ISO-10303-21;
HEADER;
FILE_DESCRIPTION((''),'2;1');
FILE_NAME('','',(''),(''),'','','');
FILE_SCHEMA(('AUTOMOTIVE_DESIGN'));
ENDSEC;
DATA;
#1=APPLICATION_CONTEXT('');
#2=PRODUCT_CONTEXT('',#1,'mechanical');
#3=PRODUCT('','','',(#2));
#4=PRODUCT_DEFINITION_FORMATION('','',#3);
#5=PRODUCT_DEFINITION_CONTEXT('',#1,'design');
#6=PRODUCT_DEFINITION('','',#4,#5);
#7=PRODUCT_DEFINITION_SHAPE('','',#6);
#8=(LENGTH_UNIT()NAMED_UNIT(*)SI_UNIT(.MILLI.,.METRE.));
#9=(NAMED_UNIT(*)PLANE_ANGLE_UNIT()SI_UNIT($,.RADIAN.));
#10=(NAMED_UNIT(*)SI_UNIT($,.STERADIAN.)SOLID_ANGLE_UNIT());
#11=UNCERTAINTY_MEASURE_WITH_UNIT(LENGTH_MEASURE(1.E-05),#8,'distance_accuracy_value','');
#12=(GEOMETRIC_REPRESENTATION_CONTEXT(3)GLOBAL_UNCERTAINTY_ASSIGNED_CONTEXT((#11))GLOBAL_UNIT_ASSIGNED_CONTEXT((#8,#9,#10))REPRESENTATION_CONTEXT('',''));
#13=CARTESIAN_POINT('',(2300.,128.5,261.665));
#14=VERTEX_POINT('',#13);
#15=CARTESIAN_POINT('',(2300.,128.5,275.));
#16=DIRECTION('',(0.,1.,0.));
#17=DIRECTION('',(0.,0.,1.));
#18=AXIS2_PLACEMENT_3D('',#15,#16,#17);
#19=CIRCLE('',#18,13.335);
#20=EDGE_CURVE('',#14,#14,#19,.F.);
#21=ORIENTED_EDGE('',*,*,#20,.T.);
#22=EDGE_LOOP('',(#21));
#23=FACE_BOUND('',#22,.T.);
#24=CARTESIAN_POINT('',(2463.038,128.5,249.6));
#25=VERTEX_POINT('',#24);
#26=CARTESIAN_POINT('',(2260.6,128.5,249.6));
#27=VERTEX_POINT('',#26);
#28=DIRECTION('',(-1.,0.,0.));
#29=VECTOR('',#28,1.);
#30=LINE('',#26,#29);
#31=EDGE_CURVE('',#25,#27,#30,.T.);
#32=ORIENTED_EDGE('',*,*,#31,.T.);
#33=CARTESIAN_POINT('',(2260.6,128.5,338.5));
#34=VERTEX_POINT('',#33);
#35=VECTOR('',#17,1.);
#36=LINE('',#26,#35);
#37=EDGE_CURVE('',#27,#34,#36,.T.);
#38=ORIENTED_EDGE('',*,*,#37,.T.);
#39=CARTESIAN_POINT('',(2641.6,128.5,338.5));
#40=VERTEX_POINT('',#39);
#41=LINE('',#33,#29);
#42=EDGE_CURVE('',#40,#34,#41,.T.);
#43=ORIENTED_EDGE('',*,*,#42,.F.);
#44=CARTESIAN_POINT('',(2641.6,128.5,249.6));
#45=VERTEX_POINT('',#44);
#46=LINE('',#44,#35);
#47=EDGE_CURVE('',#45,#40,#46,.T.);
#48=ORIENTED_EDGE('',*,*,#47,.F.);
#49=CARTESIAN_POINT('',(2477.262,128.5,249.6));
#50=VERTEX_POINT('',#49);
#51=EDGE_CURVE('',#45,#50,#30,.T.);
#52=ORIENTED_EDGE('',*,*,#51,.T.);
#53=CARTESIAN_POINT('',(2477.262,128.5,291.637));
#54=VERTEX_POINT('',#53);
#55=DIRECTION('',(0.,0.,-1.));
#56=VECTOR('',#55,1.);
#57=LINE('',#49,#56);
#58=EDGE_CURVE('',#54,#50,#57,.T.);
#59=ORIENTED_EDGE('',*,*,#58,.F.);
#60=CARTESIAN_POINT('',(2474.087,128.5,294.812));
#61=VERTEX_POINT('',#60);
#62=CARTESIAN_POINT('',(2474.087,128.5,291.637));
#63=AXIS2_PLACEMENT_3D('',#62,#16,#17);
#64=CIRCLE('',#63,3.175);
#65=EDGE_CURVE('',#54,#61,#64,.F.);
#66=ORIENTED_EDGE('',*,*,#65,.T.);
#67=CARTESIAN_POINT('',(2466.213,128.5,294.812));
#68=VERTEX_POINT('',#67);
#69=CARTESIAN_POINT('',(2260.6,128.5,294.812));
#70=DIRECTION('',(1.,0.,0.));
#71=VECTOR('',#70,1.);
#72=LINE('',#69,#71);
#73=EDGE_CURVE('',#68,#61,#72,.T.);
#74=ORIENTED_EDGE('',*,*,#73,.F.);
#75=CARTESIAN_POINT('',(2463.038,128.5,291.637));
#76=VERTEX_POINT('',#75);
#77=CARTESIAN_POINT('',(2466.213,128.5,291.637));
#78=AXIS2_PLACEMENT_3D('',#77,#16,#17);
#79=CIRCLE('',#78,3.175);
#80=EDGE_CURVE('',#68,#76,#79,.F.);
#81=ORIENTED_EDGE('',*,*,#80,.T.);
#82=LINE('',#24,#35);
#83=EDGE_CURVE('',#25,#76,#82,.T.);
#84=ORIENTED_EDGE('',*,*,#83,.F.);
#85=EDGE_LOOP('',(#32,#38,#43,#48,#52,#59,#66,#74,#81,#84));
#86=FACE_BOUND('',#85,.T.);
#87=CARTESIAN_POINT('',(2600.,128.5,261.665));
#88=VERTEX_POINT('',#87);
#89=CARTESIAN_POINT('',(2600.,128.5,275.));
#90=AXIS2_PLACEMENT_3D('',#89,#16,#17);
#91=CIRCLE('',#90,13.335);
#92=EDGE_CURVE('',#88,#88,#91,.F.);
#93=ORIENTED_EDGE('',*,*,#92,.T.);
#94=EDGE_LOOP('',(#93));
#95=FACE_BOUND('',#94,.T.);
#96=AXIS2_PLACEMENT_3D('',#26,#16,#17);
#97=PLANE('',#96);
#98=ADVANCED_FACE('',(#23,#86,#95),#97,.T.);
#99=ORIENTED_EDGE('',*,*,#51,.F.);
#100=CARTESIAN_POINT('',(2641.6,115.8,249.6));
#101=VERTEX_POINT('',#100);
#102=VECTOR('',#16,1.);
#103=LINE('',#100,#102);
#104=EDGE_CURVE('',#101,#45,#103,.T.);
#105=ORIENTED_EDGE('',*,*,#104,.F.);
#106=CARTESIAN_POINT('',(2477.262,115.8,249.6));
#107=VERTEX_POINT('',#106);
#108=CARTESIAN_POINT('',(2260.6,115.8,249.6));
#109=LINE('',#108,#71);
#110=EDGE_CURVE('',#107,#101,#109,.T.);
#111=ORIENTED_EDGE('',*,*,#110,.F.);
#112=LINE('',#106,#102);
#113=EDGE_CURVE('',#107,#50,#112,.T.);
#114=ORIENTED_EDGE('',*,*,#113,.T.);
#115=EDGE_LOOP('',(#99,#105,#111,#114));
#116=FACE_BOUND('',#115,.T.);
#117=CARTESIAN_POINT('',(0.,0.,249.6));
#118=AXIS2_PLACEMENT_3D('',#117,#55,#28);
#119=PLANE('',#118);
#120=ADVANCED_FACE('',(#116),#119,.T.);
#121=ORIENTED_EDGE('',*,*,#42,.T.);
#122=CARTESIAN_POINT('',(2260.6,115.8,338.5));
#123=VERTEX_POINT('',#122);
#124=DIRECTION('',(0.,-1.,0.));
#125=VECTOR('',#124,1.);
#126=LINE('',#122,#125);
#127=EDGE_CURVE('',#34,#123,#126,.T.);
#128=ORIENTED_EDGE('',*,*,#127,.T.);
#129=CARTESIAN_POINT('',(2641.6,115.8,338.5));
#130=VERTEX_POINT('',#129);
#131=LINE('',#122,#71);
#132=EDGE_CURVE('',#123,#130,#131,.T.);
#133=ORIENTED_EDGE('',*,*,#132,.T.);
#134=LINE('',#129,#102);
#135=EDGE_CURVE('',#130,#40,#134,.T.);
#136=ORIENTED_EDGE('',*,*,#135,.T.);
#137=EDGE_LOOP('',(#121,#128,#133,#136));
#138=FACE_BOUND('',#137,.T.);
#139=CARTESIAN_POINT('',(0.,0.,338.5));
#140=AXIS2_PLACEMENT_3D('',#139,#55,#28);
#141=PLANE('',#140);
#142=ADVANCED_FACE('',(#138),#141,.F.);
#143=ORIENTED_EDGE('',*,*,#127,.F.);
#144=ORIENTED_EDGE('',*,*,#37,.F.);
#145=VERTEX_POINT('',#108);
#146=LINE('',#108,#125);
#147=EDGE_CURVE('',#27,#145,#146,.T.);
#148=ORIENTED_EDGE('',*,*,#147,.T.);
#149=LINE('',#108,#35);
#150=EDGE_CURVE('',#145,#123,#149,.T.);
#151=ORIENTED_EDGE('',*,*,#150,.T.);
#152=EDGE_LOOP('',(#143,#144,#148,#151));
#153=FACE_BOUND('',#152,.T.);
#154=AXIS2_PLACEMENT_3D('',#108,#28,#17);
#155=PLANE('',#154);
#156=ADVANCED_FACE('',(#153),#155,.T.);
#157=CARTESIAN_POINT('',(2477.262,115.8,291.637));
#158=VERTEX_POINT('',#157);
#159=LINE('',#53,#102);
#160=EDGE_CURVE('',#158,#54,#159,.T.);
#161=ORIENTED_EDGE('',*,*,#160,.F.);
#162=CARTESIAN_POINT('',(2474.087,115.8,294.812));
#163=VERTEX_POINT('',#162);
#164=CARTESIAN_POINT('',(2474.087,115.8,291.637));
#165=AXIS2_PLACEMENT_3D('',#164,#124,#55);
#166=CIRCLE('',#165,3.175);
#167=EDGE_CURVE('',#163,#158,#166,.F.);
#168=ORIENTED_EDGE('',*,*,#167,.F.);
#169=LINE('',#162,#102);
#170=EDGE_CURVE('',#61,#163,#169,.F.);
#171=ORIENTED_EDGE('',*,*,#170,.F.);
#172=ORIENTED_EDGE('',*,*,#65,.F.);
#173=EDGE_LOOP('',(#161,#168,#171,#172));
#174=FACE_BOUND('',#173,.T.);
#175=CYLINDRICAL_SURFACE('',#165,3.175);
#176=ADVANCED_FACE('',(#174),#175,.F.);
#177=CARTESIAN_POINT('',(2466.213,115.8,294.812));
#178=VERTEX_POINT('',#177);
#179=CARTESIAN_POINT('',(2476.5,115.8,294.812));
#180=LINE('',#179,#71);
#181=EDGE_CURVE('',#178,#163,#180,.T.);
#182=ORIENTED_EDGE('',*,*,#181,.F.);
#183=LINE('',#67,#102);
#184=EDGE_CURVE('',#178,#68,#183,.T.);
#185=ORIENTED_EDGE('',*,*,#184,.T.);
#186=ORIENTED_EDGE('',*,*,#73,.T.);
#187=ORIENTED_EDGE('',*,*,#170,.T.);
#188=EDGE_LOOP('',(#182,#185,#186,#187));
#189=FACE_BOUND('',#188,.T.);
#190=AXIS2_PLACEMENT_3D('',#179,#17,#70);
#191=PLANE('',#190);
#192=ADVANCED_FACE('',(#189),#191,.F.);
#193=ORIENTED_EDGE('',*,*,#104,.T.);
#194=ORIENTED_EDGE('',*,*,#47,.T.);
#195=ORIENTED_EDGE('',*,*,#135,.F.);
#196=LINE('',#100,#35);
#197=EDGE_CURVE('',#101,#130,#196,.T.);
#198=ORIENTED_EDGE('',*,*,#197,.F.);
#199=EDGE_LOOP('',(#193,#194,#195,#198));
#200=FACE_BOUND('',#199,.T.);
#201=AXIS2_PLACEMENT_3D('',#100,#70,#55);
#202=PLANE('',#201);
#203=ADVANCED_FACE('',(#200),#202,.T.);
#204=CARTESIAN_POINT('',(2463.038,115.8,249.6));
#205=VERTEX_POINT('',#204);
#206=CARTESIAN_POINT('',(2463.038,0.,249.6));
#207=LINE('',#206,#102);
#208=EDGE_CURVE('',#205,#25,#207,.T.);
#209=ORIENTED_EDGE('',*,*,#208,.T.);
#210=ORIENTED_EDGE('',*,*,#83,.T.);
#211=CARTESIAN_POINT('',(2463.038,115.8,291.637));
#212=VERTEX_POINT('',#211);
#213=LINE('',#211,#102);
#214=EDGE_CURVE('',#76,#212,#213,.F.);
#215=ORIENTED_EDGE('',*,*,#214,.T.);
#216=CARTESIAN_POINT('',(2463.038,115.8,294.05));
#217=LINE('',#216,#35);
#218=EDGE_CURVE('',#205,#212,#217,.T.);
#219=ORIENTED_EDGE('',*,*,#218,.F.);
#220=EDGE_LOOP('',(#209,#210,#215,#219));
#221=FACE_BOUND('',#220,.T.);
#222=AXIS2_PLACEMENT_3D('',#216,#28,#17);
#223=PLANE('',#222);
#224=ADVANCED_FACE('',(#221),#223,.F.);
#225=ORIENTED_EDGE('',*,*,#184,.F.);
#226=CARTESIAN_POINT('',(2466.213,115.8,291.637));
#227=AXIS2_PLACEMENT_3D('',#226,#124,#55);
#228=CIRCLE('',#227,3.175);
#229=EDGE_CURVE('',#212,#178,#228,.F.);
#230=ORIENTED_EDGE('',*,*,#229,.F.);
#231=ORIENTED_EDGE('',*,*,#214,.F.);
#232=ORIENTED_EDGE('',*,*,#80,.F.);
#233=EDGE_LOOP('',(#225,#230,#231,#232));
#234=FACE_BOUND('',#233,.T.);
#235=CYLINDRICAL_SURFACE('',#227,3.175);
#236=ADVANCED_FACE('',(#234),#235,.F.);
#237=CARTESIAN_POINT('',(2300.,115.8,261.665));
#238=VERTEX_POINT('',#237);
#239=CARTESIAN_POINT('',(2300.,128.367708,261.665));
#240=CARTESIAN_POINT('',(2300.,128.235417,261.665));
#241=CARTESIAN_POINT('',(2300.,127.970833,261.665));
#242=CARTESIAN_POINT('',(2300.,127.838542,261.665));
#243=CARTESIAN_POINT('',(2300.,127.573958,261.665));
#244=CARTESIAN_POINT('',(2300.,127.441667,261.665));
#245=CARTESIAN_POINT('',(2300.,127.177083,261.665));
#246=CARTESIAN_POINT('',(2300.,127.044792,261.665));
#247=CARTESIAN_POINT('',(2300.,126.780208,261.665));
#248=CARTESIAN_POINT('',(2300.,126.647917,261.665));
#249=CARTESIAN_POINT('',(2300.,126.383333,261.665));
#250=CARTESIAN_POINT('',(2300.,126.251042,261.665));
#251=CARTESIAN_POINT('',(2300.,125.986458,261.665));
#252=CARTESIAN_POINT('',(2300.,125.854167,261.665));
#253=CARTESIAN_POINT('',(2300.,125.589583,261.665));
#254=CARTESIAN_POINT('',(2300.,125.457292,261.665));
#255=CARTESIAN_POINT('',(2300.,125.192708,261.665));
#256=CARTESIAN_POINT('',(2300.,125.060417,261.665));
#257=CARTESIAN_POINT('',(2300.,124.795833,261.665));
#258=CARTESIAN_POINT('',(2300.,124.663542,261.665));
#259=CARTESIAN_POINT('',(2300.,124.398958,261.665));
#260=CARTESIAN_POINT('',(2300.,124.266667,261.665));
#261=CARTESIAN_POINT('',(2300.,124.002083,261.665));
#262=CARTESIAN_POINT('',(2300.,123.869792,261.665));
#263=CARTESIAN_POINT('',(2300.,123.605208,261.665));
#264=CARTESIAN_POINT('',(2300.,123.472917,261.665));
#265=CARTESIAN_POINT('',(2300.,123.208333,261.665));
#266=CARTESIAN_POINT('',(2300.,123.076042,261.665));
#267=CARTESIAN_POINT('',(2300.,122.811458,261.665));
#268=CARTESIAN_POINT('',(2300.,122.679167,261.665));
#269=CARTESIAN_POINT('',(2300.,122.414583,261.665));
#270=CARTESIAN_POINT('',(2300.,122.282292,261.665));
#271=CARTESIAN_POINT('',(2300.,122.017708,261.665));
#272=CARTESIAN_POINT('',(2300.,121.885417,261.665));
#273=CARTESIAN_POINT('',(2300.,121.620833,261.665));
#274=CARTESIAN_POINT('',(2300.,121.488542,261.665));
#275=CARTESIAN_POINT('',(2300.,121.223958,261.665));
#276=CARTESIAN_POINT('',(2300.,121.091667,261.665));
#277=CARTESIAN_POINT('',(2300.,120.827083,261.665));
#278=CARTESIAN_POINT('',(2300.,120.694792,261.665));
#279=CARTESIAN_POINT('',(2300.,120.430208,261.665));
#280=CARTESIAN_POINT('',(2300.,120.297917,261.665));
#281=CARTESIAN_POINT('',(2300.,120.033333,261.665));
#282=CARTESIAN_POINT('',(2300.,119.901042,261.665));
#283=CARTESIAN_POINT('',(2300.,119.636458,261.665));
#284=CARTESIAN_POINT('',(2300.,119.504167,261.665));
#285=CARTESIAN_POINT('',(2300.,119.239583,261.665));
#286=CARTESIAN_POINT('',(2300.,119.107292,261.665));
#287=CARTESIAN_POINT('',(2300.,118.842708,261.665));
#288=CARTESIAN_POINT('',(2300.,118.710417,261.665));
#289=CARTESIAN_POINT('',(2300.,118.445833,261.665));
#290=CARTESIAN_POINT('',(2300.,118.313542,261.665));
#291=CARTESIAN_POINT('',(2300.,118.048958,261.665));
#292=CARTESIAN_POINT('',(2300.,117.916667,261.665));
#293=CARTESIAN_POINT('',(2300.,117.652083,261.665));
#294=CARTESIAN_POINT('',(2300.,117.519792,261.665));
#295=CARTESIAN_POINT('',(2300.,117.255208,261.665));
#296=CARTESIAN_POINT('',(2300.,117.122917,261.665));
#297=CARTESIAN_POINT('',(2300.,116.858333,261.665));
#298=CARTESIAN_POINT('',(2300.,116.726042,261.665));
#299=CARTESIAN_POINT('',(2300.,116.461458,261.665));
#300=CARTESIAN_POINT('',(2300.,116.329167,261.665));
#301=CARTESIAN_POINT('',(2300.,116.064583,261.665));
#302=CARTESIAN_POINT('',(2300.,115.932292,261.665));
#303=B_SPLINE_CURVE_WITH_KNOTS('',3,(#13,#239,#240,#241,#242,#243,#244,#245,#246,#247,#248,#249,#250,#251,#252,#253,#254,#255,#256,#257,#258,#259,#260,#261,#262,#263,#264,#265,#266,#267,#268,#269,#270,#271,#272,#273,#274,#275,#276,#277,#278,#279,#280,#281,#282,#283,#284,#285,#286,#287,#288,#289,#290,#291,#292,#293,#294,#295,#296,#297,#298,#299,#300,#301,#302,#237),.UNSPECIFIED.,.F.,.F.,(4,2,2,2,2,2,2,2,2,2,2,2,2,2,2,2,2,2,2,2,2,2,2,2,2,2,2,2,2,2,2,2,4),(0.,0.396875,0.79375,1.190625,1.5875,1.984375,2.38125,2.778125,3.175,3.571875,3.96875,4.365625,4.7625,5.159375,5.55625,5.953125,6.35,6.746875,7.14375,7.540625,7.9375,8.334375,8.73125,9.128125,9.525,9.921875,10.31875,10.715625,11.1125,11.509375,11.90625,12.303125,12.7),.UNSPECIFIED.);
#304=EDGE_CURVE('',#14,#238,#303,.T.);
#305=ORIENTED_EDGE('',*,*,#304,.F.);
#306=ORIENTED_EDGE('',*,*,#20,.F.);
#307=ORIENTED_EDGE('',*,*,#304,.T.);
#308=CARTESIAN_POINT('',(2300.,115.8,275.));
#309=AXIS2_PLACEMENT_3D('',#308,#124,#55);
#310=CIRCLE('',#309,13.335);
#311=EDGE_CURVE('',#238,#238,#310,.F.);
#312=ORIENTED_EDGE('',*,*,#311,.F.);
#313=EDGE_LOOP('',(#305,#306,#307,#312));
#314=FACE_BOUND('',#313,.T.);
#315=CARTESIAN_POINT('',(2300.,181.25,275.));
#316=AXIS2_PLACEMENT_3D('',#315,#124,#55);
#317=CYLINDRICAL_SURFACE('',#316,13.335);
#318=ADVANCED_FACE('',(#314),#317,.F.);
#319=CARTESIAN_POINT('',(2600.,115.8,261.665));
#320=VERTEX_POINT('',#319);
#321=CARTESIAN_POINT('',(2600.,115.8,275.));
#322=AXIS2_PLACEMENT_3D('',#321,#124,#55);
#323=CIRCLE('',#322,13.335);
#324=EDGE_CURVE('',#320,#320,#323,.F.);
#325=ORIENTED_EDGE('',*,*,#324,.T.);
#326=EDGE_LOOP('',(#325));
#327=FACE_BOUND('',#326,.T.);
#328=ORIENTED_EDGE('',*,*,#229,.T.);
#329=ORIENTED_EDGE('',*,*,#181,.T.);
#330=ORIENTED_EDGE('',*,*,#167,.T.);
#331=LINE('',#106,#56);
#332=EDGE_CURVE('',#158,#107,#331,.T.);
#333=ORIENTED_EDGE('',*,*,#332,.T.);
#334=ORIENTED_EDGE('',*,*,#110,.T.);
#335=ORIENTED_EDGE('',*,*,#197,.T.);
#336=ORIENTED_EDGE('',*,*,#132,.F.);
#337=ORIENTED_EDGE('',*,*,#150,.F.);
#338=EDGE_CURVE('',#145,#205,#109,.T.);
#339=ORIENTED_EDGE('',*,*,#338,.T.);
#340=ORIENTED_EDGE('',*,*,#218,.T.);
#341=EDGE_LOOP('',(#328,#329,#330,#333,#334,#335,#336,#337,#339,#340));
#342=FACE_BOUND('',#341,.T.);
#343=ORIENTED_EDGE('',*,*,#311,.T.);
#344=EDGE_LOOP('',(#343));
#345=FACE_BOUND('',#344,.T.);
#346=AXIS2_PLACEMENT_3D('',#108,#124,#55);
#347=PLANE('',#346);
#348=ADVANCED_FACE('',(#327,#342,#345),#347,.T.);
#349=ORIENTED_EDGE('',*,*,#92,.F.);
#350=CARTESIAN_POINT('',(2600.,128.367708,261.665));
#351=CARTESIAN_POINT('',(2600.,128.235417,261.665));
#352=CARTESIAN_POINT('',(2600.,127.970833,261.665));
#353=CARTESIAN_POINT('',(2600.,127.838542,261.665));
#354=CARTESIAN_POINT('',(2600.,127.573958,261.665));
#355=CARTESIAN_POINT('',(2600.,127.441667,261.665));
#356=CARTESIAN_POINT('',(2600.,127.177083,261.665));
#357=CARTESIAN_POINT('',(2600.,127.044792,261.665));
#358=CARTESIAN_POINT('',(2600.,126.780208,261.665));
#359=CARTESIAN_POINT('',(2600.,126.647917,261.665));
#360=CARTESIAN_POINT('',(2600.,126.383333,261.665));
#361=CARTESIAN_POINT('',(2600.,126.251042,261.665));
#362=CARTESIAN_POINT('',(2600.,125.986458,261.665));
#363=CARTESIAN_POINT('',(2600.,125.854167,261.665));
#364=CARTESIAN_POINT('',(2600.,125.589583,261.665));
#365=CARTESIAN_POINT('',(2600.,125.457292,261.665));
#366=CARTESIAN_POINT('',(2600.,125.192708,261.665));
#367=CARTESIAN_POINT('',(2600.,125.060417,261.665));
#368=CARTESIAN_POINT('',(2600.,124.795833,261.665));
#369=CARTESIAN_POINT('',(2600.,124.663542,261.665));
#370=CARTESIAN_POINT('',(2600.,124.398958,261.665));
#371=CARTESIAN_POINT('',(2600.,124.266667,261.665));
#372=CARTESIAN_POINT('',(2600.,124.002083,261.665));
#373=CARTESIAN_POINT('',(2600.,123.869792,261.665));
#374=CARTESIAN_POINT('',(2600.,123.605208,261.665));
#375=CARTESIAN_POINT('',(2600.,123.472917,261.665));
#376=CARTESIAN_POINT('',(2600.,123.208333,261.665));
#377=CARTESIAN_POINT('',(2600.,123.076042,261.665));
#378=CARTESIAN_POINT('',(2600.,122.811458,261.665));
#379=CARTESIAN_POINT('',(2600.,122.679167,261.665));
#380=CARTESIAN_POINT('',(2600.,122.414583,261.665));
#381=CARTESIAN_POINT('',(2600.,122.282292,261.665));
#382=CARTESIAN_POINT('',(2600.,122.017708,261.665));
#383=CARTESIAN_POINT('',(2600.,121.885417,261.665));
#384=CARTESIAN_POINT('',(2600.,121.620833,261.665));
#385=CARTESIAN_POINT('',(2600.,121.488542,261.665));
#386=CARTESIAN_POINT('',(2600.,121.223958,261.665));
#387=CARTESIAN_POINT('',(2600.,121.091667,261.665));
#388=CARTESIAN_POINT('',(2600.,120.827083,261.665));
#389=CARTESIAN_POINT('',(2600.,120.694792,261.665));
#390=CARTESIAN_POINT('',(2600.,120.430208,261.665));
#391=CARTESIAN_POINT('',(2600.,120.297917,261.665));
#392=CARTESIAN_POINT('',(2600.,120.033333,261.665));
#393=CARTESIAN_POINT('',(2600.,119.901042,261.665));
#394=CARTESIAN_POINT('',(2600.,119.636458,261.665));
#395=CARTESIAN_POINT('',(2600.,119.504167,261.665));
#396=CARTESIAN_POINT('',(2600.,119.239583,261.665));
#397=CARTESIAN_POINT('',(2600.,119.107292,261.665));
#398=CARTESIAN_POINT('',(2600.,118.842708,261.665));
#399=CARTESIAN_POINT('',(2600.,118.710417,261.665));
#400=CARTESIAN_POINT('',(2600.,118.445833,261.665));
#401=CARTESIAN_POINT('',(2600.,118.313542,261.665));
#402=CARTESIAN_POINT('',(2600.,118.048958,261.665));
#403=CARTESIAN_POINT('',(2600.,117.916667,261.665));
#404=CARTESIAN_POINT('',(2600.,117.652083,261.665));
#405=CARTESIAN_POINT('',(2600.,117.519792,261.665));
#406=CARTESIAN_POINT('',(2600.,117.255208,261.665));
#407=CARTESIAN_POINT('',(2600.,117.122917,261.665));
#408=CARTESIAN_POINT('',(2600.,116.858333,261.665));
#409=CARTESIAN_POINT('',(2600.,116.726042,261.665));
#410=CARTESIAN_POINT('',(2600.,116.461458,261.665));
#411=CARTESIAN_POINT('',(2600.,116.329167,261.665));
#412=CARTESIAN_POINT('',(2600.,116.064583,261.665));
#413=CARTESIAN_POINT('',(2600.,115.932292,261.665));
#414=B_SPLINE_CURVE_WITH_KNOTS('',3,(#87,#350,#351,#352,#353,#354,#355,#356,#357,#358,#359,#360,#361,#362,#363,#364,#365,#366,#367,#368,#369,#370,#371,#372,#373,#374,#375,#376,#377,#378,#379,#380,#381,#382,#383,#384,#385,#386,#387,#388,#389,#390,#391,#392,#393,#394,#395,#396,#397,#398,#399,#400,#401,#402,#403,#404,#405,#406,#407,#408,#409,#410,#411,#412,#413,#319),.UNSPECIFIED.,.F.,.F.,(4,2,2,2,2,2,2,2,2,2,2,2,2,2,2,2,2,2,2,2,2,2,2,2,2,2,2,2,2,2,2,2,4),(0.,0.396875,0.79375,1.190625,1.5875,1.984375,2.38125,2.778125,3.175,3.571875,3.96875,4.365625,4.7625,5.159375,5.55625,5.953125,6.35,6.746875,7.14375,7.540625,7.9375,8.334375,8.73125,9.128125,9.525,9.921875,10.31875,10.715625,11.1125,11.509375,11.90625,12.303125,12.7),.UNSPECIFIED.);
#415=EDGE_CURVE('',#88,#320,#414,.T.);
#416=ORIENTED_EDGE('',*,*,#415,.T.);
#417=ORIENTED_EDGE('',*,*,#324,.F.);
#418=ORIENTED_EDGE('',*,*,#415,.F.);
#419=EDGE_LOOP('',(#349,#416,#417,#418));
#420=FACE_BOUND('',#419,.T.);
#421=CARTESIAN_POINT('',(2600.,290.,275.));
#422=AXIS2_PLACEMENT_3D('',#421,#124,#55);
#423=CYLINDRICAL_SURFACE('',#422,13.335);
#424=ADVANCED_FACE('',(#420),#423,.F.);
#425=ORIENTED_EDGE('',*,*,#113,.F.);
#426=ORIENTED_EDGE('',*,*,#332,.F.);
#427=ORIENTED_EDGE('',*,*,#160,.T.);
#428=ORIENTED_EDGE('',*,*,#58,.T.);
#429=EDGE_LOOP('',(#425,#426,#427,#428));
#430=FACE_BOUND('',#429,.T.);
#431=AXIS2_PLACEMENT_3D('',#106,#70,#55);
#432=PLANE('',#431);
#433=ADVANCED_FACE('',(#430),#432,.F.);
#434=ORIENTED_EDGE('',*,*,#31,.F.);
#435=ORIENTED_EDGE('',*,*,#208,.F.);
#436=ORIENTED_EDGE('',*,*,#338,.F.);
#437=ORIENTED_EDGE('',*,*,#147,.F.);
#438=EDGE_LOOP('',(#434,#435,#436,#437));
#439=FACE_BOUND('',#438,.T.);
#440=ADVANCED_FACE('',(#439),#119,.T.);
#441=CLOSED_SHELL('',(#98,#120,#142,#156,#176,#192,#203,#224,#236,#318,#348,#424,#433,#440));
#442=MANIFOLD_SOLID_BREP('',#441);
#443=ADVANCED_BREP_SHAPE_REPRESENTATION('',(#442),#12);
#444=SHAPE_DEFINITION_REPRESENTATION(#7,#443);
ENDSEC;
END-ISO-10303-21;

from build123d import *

# Parameters (mm, degrees)
BOSS_EXTRUDE1_DEPTH      = 50.8
BOSS_EXTRUDE1_DEPTH_BACK = 38.1
SKETCH2_W                = 381
SKETCH2_H                = 12.7
SKETCH3_W                = 12.7
SKETCH3_H                = 44.45
CUT_EXTRUDE1_DEPTH       = 2664.230012597
CAVITY1_START            = 115.8
CAVITY1_OUTLINE_R        = 12.7
CAVITY1_DEPTH            = 12.7
MOVE_FACE_HOLES_BY       = 0.635
MOVE_FACE_HOLES_2_BY     = 0.635
MOVE_FACE_SLOTS_BY       = 0.762
MOVE_FACE_SLOTS_2_BY     = 0.762
MOVE_FACE_SLOTS_3_BY     = 0.762
SLOT_FILLET_R            = 3.175


# Read off the part's stored shape, not the designer's step: Cavity1
with BuildPart() as part:
    # Sketch2 → Boss-Extrude1 (new, two sides: drawn at the far end of the back side and taken through both)
    with BuildSketch(Plane.XY.offset(287.7).offset(-BOSS_EXTRUDE1_DEPTH_BACK)):
        with Locations((2451.1, 122.15)):
            Rectangle(SKETCH2_W, SKETCH2_H)
    extrude(amount=BOSS_EXTRUDE1_DEPTH + BOSS_EXTRUDE1_DEPTH_BACK)

    # Sketch3 → Cut-Extrude1 (cut, through all)
    with BuildSketch(Plane(origin=(0, 128.5, 0), x_dir=(1, 0, 0), z_dir=(0, 1, 0))):
        with Locations((2470.15, -271.825)):
            Rectangle(SKETCH3_W, SKETCH3_H)
    extrude(amount=-CUT_EXTRUDE1_DEPTH, mode=Mode.SUBTRACT)

    # Cavity1 outline → Cavity1 (cut)
    with BuildSketch(Plane(origin=(0, 0, 0), x_dir=(1, 0, 0), z_dir=(0, 1, 0)).offset(CAVITY1_START)):
        with Locations((2300, -275)):
            Circle(CAVITY1_OUTLINE_R)
        with Locations((2600, -275)):
            Circle(CAVITY1_OUTLINE_R)
    extrude(amount=CAVITY1_DEPTH, mode=Mode.SUBTRACT)

    # Move Face Holes: a curved face moved inward by 0.635
    add(Solid.thicken(part.faces().sort_by_distance((2587.3, 122.15, 275))[0], -MOVE_FACE_HOLES_BY), mode=Mode.SUBTRACT)

    # Move Face Holes 2: a curved face moved inward by 0.635
    add(Solid.thicken(part.faces().sort_by_distance((2287.3, 122.15, 275))[0], -MOVE_FACE_HOLES_2_BY), mode=Mode.SUBTRACT)

    # Move Face Slots: a face moved inward by 0.762
    extrude(part.faces().sort_by_distance((2463.8, 122.15, 271.825))[0], amount=MOVE_FACE_SLOTS_BY, dir=(-1, 0, 0), mode=Mode.SUBTRACT)

    # Move Face Slots 2: a face moved inward by 0.762
    extrude(part.faces().sort_by_distance((2470.15, 122.15, 294.05))[0], amount=MOVE_FACE_SLOTS_2_BY, dir=(0, 0, 1), mode=Mode.SUBTRACT)

    # Move Face Slots 3: a face moved inward by 0.762
    extrude(part.faces().sort_by_distance((2476.5, 122.15, 271.825))[0], amount=MOVE_FACE_SLOTS_3_BY, dir=(1, 0, 0), mode=Mode.SUBTRACT)

    # Slot Fillet
    slot_fillet_edges = [part.edges().sort_by_distance(p)[0] for p in [
        (2477.262, 122.15, 294.812),
        (2463.038, 122.15, 294.812),
    ]]
    fillet(slot_fillet_edges, radius=SLOT_FILLET_R)


solid = part.part
